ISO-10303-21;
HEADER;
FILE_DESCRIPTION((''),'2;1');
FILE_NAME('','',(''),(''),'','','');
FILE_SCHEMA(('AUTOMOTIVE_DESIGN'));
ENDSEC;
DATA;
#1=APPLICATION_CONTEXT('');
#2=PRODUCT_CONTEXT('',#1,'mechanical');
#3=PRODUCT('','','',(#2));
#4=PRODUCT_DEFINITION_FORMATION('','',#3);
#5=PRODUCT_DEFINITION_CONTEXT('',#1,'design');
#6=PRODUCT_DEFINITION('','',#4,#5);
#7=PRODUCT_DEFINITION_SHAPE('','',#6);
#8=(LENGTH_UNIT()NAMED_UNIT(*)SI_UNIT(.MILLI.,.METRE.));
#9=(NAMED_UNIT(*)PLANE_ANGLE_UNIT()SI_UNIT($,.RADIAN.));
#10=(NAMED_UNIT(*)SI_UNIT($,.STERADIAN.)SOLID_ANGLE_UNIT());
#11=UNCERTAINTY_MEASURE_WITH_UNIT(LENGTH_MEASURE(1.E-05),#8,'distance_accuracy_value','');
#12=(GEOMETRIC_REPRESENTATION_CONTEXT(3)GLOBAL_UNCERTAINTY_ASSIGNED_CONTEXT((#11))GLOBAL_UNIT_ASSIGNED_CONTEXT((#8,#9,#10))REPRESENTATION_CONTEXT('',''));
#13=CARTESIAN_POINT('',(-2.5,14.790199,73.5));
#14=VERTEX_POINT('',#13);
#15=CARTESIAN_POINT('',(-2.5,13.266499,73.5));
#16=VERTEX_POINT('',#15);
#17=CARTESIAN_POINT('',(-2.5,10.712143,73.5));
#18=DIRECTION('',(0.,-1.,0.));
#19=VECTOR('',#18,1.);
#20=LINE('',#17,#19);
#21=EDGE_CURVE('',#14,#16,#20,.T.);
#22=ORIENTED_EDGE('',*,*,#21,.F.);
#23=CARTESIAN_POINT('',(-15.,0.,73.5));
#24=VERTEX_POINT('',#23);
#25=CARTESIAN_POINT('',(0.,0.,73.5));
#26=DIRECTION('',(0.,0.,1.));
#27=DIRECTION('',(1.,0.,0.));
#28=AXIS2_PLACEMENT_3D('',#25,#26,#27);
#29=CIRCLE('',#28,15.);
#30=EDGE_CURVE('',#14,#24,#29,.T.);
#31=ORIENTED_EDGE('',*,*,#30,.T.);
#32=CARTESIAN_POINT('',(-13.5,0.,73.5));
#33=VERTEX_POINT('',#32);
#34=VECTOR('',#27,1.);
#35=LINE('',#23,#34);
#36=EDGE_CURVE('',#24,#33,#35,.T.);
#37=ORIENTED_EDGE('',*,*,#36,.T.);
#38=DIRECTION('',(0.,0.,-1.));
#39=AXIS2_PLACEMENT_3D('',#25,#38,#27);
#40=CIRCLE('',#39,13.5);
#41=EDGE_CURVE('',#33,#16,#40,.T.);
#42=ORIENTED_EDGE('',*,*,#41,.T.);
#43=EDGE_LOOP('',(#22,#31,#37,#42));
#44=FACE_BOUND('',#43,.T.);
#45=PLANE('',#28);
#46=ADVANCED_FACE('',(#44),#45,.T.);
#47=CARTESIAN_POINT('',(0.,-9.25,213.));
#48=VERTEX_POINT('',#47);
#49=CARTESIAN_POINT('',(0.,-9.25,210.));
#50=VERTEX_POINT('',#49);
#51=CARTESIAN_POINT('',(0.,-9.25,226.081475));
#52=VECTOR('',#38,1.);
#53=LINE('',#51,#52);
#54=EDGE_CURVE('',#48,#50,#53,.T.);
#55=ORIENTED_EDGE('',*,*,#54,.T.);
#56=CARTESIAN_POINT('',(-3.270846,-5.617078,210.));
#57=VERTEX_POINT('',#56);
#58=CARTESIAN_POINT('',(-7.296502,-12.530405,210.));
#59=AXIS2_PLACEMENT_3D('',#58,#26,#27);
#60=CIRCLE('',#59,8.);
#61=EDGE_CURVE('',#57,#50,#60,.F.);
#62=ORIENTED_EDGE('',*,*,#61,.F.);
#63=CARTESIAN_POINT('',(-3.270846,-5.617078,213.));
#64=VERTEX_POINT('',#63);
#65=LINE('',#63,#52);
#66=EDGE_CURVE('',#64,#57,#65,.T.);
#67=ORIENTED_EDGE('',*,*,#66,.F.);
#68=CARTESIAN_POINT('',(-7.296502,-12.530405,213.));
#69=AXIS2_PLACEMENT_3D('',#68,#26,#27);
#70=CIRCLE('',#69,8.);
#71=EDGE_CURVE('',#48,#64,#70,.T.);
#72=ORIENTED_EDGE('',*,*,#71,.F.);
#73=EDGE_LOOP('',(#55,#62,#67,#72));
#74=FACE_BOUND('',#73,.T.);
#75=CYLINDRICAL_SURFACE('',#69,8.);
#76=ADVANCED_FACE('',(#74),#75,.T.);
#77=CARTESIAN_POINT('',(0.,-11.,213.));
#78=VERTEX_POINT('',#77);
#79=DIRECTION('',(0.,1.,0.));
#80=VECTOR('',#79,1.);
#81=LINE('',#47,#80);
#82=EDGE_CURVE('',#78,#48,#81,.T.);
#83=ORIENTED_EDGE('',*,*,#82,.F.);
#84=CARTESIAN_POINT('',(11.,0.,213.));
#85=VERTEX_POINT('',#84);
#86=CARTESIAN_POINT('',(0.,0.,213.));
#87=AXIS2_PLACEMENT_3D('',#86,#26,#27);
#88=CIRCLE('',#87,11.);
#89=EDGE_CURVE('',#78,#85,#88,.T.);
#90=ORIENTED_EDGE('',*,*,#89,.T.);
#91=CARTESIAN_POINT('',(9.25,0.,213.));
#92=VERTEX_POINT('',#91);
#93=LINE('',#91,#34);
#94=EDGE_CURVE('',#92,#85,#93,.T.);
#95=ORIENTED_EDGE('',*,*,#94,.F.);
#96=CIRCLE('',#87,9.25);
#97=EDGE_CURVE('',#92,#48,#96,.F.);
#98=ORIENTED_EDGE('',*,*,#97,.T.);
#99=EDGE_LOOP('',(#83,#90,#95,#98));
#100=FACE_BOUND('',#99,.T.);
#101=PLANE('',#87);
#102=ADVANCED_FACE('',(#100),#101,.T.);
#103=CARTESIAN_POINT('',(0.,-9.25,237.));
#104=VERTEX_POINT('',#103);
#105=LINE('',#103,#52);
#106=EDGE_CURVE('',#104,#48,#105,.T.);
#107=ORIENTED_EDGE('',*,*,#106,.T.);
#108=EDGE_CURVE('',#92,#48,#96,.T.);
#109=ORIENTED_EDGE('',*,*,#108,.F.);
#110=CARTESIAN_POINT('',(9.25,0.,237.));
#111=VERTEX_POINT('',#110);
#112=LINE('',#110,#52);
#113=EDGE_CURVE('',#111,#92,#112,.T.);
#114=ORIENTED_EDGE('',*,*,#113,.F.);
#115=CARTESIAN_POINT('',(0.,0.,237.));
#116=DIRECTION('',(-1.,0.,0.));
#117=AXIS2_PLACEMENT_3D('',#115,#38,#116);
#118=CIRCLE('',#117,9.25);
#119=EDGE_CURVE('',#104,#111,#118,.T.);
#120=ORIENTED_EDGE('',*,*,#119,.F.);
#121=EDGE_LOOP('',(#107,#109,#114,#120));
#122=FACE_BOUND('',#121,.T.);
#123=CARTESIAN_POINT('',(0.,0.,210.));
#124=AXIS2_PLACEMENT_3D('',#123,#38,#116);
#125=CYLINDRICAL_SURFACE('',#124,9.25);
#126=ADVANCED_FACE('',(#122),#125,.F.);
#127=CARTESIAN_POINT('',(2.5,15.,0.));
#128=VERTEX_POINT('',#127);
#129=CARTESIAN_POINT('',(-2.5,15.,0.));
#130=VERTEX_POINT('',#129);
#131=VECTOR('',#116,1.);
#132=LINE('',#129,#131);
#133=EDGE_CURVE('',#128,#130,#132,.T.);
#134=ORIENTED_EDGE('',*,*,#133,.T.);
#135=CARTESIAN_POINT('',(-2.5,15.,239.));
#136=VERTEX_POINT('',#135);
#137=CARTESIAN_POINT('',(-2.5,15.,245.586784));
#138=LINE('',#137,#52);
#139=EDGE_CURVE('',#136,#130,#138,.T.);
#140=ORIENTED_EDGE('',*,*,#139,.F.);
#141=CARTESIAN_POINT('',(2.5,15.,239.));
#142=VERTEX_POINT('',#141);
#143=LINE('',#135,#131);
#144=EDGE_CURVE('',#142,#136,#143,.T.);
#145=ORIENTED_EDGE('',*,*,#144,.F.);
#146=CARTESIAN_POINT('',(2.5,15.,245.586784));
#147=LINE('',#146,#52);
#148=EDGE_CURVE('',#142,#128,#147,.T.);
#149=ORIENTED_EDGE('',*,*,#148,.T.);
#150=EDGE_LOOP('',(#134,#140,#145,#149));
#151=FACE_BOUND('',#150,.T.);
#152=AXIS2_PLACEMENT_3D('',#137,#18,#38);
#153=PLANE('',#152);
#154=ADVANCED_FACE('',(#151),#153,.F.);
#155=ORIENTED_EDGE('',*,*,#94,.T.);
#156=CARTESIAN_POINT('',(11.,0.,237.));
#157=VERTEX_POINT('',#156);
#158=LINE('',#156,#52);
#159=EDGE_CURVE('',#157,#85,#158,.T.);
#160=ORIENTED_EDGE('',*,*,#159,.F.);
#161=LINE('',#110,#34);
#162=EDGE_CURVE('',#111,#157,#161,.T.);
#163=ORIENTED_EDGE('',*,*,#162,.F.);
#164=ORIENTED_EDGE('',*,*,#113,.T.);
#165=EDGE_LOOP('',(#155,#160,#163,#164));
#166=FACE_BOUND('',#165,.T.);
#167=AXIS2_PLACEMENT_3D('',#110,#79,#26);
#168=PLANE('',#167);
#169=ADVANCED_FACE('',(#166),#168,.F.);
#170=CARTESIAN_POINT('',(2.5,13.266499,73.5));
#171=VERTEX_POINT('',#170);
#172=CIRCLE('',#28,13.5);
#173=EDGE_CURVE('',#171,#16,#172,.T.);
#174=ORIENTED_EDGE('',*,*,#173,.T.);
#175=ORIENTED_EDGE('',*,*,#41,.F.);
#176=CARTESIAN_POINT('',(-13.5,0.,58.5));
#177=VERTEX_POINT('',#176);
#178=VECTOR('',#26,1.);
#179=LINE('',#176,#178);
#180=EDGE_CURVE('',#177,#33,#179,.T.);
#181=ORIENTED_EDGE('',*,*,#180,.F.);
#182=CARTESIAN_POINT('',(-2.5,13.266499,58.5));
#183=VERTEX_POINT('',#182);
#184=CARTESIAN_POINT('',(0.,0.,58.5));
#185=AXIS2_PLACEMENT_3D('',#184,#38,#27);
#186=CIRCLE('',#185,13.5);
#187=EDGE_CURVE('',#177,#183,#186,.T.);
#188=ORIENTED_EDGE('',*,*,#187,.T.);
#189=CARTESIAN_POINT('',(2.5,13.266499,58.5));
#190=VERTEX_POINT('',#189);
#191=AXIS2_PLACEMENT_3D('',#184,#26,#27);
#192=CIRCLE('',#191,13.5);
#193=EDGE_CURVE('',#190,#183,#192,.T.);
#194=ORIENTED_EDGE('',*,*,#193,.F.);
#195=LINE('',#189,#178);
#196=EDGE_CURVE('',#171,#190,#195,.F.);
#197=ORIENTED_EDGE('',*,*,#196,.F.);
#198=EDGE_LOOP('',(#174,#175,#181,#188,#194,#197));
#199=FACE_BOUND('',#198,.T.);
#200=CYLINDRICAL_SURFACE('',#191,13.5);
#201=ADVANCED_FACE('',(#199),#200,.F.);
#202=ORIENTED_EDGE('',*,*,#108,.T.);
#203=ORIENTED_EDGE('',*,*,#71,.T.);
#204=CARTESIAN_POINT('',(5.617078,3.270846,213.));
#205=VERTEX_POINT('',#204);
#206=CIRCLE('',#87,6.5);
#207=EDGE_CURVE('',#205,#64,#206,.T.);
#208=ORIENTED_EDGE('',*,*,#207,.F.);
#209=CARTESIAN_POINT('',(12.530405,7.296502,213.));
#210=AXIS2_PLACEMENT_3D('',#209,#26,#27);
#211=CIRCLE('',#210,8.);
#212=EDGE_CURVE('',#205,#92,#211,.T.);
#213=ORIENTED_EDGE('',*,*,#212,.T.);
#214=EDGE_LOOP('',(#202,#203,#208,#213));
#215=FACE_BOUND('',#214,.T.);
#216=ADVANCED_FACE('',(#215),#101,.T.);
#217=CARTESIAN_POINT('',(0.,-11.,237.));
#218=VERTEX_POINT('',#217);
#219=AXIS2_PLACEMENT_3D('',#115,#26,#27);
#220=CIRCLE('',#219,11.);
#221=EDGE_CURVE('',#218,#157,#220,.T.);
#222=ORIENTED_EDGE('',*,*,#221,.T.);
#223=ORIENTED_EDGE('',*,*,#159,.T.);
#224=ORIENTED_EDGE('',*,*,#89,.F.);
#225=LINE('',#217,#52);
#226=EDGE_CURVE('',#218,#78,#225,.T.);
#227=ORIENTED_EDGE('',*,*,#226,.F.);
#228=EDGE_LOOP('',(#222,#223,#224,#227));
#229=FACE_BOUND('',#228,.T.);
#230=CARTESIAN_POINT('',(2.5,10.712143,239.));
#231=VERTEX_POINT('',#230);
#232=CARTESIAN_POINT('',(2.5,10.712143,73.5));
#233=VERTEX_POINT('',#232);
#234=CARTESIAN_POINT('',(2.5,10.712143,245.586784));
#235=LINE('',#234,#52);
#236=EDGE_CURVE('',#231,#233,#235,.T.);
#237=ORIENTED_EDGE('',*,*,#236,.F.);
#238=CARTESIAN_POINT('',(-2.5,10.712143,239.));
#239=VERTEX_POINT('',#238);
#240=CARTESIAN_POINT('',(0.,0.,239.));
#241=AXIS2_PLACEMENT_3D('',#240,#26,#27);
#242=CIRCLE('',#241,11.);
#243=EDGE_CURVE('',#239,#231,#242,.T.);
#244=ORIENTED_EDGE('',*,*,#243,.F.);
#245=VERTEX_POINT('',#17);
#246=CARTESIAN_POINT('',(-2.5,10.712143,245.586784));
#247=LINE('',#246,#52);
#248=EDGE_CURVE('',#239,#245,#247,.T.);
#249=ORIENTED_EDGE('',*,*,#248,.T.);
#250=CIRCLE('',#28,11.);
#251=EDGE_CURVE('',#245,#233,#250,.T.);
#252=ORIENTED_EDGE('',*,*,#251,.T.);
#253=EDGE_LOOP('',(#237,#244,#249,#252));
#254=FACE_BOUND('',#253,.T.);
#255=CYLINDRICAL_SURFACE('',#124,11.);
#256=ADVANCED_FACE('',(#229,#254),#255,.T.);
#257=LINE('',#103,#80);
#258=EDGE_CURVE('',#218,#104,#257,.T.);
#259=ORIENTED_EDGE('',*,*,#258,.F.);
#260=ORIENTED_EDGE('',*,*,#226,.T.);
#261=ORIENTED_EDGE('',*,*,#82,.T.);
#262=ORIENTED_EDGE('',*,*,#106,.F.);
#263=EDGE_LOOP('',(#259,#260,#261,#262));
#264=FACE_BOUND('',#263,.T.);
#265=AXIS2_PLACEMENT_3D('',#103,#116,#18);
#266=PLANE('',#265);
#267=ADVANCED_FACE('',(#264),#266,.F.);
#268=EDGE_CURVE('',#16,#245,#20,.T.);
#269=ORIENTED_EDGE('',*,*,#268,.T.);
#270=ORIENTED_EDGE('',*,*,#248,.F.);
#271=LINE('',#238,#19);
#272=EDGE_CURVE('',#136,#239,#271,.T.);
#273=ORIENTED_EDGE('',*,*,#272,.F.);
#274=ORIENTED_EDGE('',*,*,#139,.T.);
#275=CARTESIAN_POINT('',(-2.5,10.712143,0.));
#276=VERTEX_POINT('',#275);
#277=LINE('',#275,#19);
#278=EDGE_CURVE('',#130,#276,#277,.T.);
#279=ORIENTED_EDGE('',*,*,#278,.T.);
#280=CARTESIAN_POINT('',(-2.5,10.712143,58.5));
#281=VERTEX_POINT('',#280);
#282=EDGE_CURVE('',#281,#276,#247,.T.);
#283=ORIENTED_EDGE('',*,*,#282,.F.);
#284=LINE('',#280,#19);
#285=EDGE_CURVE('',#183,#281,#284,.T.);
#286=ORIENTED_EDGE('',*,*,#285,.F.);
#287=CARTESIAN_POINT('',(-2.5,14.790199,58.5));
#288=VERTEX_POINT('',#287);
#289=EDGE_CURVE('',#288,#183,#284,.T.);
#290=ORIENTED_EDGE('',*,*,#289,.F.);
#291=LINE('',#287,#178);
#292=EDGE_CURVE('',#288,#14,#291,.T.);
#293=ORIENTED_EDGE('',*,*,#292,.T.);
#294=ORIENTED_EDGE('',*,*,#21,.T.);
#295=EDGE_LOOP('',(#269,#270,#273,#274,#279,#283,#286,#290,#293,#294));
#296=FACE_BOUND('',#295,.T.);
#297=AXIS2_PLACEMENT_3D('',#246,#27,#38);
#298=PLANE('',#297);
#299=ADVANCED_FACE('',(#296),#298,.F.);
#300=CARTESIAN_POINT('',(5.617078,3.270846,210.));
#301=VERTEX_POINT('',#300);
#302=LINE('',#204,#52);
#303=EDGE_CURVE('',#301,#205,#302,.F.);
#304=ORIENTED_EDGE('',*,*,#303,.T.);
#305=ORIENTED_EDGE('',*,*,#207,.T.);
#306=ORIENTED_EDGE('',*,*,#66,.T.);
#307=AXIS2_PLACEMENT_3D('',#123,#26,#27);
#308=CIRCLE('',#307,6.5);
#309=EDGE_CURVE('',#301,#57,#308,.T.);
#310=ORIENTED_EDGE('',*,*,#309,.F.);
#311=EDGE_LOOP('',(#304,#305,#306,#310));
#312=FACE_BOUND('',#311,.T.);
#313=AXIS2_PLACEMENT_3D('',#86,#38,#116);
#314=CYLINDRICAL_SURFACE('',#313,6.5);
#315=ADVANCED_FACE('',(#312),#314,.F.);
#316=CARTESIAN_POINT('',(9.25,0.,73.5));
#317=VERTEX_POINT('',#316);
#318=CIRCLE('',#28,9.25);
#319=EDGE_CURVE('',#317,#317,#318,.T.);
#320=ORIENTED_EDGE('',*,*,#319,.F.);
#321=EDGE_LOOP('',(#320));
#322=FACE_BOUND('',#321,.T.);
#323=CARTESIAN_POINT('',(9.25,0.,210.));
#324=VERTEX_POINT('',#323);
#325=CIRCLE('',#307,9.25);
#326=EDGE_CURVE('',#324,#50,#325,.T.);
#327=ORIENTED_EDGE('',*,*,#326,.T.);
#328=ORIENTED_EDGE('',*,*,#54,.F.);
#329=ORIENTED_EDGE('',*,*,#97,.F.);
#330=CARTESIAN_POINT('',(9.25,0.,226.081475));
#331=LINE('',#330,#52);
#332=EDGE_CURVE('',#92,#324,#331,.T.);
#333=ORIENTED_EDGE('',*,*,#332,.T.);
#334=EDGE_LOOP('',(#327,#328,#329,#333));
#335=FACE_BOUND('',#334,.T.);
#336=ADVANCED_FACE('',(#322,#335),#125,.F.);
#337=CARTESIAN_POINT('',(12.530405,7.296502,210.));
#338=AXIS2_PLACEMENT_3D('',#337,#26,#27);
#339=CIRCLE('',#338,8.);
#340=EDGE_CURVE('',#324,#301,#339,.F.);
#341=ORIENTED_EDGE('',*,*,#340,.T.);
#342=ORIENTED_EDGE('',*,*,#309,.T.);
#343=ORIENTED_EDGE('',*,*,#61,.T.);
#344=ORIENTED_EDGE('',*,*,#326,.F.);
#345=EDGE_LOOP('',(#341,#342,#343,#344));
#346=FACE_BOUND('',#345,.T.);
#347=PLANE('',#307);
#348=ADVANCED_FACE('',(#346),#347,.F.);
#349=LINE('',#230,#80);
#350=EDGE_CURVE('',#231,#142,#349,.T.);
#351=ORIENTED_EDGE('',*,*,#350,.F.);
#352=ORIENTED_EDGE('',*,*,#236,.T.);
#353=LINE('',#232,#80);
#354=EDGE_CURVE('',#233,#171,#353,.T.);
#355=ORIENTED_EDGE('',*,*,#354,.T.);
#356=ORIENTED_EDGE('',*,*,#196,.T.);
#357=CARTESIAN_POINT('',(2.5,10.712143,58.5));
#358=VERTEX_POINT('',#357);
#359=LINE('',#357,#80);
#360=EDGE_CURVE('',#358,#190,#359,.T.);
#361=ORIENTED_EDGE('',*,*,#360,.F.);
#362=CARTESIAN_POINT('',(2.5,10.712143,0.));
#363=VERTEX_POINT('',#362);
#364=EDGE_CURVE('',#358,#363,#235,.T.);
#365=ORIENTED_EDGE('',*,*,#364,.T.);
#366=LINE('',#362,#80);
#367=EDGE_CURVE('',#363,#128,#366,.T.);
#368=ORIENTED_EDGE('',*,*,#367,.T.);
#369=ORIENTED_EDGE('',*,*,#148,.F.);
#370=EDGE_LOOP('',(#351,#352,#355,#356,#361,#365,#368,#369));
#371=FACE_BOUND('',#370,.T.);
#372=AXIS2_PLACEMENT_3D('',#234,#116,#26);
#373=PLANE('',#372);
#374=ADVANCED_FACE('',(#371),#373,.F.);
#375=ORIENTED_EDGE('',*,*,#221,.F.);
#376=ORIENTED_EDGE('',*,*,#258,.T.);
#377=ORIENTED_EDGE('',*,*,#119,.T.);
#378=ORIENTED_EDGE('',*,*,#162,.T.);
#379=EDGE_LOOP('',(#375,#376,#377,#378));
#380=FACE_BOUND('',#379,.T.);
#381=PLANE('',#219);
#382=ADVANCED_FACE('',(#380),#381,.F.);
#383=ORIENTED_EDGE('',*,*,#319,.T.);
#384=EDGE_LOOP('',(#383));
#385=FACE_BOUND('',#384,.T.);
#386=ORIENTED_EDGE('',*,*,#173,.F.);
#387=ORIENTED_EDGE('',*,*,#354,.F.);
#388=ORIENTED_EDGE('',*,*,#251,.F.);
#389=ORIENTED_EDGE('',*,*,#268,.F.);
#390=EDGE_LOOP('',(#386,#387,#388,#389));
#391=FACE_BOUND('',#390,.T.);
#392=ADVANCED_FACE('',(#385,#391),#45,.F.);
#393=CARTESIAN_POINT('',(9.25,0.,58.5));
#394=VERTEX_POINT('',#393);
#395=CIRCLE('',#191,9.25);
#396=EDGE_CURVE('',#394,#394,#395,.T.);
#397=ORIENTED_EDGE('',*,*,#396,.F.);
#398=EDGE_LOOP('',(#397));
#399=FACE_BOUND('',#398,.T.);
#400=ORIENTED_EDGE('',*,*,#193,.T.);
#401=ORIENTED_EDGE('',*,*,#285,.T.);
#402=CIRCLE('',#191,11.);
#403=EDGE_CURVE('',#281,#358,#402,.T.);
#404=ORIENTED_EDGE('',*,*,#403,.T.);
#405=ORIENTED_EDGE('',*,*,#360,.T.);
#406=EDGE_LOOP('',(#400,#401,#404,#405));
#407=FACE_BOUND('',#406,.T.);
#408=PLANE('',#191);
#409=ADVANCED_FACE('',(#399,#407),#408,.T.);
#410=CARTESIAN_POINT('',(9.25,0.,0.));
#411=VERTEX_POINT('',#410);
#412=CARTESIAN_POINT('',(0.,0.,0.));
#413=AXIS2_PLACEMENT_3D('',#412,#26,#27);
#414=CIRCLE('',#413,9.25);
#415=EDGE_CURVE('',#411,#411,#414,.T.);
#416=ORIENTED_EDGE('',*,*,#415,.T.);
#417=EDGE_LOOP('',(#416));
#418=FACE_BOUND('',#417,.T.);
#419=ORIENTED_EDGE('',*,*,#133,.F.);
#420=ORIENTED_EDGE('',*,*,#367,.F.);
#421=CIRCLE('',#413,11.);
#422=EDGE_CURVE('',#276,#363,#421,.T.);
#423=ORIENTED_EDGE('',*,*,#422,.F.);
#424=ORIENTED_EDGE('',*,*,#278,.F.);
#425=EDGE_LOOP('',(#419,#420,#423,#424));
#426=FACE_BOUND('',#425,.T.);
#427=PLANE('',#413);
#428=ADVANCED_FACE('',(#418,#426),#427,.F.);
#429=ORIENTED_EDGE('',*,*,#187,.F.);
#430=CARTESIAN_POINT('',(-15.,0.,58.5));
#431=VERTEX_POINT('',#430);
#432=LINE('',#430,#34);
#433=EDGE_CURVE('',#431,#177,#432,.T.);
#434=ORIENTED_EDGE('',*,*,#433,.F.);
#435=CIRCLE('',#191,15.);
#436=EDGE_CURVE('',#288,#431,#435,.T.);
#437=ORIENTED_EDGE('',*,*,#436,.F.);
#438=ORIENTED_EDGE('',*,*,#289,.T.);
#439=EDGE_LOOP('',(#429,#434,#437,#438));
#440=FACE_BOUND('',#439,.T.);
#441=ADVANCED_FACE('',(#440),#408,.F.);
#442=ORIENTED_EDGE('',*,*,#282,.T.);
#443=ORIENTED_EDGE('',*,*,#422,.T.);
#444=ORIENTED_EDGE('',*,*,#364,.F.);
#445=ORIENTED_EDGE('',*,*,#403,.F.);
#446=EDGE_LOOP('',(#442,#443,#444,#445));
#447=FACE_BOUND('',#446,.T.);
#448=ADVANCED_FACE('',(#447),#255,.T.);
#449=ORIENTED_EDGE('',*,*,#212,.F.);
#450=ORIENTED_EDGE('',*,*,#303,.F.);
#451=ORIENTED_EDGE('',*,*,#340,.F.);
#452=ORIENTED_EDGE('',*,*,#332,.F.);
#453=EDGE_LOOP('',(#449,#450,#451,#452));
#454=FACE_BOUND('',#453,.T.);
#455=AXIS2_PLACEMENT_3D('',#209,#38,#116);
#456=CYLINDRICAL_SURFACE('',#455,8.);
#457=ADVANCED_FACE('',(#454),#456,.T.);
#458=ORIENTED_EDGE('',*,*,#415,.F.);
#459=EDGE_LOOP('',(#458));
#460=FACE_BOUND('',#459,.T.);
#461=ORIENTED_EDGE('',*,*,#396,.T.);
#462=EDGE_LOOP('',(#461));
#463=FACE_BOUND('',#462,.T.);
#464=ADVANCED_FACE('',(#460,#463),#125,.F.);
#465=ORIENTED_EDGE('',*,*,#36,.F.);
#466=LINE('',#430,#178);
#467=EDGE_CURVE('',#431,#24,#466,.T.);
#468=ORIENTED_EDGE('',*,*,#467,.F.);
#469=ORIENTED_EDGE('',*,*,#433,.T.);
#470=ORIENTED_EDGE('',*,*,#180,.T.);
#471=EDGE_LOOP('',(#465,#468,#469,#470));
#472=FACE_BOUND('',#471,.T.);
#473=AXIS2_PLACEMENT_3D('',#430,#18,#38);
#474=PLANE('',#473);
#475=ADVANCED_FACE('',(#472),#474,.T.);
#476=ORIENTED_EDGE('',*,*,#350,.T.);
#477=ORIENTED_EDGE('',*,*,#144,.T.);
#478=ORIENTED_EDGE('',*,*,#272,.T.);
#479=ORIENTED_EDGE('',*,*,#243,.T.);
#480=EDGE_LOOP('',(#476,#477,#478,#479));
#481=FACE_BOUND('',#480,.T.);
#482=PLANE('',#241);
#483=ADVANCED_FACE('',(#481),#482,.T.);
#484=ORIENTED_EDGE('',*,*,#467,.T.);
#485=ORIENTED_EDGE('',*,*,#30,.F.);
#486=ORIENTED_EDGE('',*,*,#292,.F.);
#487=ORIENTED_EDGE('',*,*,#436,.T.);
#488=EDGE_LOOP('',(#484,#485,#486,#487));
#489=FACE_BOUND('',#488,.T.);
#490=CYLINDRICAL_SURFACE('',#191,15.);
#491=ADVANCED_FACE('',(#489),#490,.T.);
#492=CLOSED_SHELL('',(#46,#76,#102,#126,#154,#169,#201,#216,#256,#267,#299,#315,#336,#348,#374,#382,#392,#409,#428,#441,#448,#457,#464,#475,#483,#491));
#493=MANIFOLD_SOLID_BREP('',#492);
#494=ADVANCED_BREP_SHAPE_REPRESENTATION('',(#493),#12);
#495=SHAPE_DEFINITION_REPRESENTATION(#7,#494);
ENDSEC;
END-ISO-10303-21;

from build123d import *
from build123d.topology import SkipClean

# Parameters (mm, degrees)
SCHIZZO1_R                  = 11
SCHIZZO1_R_2                = 9.25
TUBO_DEPTH                  = 210
INGRESSOCAVI_DEPTH          = 27
SCHIZZO4_R                  = 11
SCHIZZO4_R_2                = 6.5
FONDOCORSA_DEPTH            = 3
SCHIZZO5_R                  = 11
TAPPO_DEPTH                 = 2
BASEINFERIORE_DEPTH         = 239
SCHIZZO7_R                  = 13.5
TAGLIOANELLO_DEPTH          = 15
SUPPORTOANELLO_DEPTH        = 15
FACILITAZIONECAVI_DEPTH     = 3
RACCORDOFACILITAZIONECAVI_R = 8


with BuildPart() as part:
    # Schizzo1 → Tubo (new body)
    with BuildSketch(Plane.XY):
        Circle(SCHIZZO1_R)
        Circle(SCHIZZO1_R_2, mode=Mode.SUBTRACT)
    extrude(amount=TUBO_DEPTH)

    # Schizzo2 → IngressoCavi (add)
    with BuildSketch(Plane.XY.offset(210)):
        with BuildLine():
            Line((0, -9.25), (0, -11))
            ThreePointArc((0, -11), (-7.778174593, 7.778174593), (11, 0))
            Line((11, 0), (9.25, 0))
            ThreePointArc((9.25, 0), (-6.540737726, 6.540737726), (0, -9.25))
        make_face()
    extrude(amount=INGRESSOCAVI_DEPTH)

    # Schizzo4 → FondoCorsa (add)
    with SkipClean():  # the faces are left unmerged after this step: merging them gives an invalid solid
        with BuildSketch(Plane.XY.offset(210)):
            Circle(SCHIZZO4_R)
            Circle(SCHIZZO4_R_2, mode=Mode.SUBTRACT)
        extrude(amount=FONDOCORSA_DEPTH)

    # Schizzo5 → Tappo (add)
    with SkipClean():  # the faces are left unmerged after this step: merging them gives an invalid solid
        with BuildSketch(Plane.XY.offset(237)):
            Circle(SCHIZZO5_R)
        extrude(amount=TAPPO_DEPTH)
    add(part.part.scale(1), mode=Mode.REPLACE)  # the faces are merged on a copy

    # Schizzo6 → BaseInferiore (add)
    with BuildSketch(Plane.XY):
        Polygon((-2.5, 11), (-2.5, 15), (2.5, 15), (2.5, 11), (2.5, 10.712142643), (-2.5, 10.712142643), align=None)
    extrude(amount=BASEINFERIORE_DEPTH)

    # Schizzo7 → TaglioAnello (cut)
    with BuildSketch(Plane.XY.offset(73.5)):
        Circle(SCHIZZO7_R)
    extrude(amount=-TAGLIOANELLO_DEPTH, mode=Mode.SUBTRACT)

    # Schizzo8 → SupportoAnello (add)
    with BuildSketch(Plane.XY.offset(73.5)):
        with BuildLine():
            Line((0, 15), (0, 13.5))
            ThreePointArc((0, 13.5), (-9.545941546, 9.545941546), (-13.5, 0))
            Line((-13.5, 0), (-15, 0))
            ThreePointArc((-15, 0), (-10.606601718, 10.606601718), (0, 15))
        make_face()
    extrude(amount=-SUPPORTOANELLO_DEPTH)

    # Schizzo9 → FacilitazioneCavi (cut)
    with BuildSketch(Plane(origin=(0, 0, 210), x_dir=(-1, 0, 0), z_dir=(0, 0, -1))):
        with BuildLine():
            Line((0, -9.25), (0, 0))
            Line((0, 0), (-9.25, 0))
            ThreePointArc((-9.25, 0), (-6.540737726, -6.540737726), (0, -9.25))
        make_face()
    extrude(amount=-FACILITAZIONECAVI_DEPTH, mode=Mode.SUBTRACT)

    # RaccordoFacilitazioneCavi
    # the kernel refuses this fillet: 8 mm, written as the material it takes off along each edge
    with BuildSketch(Plane(origin=(6.5, 0, 201.530207244), x_dir=(1, 0, 0), z_dir=(0, 0, 1)), Plane(origin=(0, -6.5, 221.469792756), x_dir=(0, -1, 0), z_dir=(0, 0, -1))) as raccordofacilitazionecavi_piece_1:
        with BuildLine():
            CenterArc((6.030405405, 7.296501927), RACCORDOFACILITAZIONECAVI_R, 210.212403153, 35.579578639)
            Line((-0.882921715, 3.270845692), (-1.021188257, 3.190332567))
            ThreePointArc((-1.021188257, 3.190332567), (-0.379082322, 1.65226111), (-0.16, 0))
            Line((-0.16, 0), (0, -0.16))
            ThreePointArc((0, -0.16), (1.375, -0.16), (2.684391892, -0.145930039))
            Line((2.684391892, -0.145930039), (2.75, 0))
        make_face()
    extrude(amount=19.939585512, mode=Mode.SUBTRACT)


solid = part.part
